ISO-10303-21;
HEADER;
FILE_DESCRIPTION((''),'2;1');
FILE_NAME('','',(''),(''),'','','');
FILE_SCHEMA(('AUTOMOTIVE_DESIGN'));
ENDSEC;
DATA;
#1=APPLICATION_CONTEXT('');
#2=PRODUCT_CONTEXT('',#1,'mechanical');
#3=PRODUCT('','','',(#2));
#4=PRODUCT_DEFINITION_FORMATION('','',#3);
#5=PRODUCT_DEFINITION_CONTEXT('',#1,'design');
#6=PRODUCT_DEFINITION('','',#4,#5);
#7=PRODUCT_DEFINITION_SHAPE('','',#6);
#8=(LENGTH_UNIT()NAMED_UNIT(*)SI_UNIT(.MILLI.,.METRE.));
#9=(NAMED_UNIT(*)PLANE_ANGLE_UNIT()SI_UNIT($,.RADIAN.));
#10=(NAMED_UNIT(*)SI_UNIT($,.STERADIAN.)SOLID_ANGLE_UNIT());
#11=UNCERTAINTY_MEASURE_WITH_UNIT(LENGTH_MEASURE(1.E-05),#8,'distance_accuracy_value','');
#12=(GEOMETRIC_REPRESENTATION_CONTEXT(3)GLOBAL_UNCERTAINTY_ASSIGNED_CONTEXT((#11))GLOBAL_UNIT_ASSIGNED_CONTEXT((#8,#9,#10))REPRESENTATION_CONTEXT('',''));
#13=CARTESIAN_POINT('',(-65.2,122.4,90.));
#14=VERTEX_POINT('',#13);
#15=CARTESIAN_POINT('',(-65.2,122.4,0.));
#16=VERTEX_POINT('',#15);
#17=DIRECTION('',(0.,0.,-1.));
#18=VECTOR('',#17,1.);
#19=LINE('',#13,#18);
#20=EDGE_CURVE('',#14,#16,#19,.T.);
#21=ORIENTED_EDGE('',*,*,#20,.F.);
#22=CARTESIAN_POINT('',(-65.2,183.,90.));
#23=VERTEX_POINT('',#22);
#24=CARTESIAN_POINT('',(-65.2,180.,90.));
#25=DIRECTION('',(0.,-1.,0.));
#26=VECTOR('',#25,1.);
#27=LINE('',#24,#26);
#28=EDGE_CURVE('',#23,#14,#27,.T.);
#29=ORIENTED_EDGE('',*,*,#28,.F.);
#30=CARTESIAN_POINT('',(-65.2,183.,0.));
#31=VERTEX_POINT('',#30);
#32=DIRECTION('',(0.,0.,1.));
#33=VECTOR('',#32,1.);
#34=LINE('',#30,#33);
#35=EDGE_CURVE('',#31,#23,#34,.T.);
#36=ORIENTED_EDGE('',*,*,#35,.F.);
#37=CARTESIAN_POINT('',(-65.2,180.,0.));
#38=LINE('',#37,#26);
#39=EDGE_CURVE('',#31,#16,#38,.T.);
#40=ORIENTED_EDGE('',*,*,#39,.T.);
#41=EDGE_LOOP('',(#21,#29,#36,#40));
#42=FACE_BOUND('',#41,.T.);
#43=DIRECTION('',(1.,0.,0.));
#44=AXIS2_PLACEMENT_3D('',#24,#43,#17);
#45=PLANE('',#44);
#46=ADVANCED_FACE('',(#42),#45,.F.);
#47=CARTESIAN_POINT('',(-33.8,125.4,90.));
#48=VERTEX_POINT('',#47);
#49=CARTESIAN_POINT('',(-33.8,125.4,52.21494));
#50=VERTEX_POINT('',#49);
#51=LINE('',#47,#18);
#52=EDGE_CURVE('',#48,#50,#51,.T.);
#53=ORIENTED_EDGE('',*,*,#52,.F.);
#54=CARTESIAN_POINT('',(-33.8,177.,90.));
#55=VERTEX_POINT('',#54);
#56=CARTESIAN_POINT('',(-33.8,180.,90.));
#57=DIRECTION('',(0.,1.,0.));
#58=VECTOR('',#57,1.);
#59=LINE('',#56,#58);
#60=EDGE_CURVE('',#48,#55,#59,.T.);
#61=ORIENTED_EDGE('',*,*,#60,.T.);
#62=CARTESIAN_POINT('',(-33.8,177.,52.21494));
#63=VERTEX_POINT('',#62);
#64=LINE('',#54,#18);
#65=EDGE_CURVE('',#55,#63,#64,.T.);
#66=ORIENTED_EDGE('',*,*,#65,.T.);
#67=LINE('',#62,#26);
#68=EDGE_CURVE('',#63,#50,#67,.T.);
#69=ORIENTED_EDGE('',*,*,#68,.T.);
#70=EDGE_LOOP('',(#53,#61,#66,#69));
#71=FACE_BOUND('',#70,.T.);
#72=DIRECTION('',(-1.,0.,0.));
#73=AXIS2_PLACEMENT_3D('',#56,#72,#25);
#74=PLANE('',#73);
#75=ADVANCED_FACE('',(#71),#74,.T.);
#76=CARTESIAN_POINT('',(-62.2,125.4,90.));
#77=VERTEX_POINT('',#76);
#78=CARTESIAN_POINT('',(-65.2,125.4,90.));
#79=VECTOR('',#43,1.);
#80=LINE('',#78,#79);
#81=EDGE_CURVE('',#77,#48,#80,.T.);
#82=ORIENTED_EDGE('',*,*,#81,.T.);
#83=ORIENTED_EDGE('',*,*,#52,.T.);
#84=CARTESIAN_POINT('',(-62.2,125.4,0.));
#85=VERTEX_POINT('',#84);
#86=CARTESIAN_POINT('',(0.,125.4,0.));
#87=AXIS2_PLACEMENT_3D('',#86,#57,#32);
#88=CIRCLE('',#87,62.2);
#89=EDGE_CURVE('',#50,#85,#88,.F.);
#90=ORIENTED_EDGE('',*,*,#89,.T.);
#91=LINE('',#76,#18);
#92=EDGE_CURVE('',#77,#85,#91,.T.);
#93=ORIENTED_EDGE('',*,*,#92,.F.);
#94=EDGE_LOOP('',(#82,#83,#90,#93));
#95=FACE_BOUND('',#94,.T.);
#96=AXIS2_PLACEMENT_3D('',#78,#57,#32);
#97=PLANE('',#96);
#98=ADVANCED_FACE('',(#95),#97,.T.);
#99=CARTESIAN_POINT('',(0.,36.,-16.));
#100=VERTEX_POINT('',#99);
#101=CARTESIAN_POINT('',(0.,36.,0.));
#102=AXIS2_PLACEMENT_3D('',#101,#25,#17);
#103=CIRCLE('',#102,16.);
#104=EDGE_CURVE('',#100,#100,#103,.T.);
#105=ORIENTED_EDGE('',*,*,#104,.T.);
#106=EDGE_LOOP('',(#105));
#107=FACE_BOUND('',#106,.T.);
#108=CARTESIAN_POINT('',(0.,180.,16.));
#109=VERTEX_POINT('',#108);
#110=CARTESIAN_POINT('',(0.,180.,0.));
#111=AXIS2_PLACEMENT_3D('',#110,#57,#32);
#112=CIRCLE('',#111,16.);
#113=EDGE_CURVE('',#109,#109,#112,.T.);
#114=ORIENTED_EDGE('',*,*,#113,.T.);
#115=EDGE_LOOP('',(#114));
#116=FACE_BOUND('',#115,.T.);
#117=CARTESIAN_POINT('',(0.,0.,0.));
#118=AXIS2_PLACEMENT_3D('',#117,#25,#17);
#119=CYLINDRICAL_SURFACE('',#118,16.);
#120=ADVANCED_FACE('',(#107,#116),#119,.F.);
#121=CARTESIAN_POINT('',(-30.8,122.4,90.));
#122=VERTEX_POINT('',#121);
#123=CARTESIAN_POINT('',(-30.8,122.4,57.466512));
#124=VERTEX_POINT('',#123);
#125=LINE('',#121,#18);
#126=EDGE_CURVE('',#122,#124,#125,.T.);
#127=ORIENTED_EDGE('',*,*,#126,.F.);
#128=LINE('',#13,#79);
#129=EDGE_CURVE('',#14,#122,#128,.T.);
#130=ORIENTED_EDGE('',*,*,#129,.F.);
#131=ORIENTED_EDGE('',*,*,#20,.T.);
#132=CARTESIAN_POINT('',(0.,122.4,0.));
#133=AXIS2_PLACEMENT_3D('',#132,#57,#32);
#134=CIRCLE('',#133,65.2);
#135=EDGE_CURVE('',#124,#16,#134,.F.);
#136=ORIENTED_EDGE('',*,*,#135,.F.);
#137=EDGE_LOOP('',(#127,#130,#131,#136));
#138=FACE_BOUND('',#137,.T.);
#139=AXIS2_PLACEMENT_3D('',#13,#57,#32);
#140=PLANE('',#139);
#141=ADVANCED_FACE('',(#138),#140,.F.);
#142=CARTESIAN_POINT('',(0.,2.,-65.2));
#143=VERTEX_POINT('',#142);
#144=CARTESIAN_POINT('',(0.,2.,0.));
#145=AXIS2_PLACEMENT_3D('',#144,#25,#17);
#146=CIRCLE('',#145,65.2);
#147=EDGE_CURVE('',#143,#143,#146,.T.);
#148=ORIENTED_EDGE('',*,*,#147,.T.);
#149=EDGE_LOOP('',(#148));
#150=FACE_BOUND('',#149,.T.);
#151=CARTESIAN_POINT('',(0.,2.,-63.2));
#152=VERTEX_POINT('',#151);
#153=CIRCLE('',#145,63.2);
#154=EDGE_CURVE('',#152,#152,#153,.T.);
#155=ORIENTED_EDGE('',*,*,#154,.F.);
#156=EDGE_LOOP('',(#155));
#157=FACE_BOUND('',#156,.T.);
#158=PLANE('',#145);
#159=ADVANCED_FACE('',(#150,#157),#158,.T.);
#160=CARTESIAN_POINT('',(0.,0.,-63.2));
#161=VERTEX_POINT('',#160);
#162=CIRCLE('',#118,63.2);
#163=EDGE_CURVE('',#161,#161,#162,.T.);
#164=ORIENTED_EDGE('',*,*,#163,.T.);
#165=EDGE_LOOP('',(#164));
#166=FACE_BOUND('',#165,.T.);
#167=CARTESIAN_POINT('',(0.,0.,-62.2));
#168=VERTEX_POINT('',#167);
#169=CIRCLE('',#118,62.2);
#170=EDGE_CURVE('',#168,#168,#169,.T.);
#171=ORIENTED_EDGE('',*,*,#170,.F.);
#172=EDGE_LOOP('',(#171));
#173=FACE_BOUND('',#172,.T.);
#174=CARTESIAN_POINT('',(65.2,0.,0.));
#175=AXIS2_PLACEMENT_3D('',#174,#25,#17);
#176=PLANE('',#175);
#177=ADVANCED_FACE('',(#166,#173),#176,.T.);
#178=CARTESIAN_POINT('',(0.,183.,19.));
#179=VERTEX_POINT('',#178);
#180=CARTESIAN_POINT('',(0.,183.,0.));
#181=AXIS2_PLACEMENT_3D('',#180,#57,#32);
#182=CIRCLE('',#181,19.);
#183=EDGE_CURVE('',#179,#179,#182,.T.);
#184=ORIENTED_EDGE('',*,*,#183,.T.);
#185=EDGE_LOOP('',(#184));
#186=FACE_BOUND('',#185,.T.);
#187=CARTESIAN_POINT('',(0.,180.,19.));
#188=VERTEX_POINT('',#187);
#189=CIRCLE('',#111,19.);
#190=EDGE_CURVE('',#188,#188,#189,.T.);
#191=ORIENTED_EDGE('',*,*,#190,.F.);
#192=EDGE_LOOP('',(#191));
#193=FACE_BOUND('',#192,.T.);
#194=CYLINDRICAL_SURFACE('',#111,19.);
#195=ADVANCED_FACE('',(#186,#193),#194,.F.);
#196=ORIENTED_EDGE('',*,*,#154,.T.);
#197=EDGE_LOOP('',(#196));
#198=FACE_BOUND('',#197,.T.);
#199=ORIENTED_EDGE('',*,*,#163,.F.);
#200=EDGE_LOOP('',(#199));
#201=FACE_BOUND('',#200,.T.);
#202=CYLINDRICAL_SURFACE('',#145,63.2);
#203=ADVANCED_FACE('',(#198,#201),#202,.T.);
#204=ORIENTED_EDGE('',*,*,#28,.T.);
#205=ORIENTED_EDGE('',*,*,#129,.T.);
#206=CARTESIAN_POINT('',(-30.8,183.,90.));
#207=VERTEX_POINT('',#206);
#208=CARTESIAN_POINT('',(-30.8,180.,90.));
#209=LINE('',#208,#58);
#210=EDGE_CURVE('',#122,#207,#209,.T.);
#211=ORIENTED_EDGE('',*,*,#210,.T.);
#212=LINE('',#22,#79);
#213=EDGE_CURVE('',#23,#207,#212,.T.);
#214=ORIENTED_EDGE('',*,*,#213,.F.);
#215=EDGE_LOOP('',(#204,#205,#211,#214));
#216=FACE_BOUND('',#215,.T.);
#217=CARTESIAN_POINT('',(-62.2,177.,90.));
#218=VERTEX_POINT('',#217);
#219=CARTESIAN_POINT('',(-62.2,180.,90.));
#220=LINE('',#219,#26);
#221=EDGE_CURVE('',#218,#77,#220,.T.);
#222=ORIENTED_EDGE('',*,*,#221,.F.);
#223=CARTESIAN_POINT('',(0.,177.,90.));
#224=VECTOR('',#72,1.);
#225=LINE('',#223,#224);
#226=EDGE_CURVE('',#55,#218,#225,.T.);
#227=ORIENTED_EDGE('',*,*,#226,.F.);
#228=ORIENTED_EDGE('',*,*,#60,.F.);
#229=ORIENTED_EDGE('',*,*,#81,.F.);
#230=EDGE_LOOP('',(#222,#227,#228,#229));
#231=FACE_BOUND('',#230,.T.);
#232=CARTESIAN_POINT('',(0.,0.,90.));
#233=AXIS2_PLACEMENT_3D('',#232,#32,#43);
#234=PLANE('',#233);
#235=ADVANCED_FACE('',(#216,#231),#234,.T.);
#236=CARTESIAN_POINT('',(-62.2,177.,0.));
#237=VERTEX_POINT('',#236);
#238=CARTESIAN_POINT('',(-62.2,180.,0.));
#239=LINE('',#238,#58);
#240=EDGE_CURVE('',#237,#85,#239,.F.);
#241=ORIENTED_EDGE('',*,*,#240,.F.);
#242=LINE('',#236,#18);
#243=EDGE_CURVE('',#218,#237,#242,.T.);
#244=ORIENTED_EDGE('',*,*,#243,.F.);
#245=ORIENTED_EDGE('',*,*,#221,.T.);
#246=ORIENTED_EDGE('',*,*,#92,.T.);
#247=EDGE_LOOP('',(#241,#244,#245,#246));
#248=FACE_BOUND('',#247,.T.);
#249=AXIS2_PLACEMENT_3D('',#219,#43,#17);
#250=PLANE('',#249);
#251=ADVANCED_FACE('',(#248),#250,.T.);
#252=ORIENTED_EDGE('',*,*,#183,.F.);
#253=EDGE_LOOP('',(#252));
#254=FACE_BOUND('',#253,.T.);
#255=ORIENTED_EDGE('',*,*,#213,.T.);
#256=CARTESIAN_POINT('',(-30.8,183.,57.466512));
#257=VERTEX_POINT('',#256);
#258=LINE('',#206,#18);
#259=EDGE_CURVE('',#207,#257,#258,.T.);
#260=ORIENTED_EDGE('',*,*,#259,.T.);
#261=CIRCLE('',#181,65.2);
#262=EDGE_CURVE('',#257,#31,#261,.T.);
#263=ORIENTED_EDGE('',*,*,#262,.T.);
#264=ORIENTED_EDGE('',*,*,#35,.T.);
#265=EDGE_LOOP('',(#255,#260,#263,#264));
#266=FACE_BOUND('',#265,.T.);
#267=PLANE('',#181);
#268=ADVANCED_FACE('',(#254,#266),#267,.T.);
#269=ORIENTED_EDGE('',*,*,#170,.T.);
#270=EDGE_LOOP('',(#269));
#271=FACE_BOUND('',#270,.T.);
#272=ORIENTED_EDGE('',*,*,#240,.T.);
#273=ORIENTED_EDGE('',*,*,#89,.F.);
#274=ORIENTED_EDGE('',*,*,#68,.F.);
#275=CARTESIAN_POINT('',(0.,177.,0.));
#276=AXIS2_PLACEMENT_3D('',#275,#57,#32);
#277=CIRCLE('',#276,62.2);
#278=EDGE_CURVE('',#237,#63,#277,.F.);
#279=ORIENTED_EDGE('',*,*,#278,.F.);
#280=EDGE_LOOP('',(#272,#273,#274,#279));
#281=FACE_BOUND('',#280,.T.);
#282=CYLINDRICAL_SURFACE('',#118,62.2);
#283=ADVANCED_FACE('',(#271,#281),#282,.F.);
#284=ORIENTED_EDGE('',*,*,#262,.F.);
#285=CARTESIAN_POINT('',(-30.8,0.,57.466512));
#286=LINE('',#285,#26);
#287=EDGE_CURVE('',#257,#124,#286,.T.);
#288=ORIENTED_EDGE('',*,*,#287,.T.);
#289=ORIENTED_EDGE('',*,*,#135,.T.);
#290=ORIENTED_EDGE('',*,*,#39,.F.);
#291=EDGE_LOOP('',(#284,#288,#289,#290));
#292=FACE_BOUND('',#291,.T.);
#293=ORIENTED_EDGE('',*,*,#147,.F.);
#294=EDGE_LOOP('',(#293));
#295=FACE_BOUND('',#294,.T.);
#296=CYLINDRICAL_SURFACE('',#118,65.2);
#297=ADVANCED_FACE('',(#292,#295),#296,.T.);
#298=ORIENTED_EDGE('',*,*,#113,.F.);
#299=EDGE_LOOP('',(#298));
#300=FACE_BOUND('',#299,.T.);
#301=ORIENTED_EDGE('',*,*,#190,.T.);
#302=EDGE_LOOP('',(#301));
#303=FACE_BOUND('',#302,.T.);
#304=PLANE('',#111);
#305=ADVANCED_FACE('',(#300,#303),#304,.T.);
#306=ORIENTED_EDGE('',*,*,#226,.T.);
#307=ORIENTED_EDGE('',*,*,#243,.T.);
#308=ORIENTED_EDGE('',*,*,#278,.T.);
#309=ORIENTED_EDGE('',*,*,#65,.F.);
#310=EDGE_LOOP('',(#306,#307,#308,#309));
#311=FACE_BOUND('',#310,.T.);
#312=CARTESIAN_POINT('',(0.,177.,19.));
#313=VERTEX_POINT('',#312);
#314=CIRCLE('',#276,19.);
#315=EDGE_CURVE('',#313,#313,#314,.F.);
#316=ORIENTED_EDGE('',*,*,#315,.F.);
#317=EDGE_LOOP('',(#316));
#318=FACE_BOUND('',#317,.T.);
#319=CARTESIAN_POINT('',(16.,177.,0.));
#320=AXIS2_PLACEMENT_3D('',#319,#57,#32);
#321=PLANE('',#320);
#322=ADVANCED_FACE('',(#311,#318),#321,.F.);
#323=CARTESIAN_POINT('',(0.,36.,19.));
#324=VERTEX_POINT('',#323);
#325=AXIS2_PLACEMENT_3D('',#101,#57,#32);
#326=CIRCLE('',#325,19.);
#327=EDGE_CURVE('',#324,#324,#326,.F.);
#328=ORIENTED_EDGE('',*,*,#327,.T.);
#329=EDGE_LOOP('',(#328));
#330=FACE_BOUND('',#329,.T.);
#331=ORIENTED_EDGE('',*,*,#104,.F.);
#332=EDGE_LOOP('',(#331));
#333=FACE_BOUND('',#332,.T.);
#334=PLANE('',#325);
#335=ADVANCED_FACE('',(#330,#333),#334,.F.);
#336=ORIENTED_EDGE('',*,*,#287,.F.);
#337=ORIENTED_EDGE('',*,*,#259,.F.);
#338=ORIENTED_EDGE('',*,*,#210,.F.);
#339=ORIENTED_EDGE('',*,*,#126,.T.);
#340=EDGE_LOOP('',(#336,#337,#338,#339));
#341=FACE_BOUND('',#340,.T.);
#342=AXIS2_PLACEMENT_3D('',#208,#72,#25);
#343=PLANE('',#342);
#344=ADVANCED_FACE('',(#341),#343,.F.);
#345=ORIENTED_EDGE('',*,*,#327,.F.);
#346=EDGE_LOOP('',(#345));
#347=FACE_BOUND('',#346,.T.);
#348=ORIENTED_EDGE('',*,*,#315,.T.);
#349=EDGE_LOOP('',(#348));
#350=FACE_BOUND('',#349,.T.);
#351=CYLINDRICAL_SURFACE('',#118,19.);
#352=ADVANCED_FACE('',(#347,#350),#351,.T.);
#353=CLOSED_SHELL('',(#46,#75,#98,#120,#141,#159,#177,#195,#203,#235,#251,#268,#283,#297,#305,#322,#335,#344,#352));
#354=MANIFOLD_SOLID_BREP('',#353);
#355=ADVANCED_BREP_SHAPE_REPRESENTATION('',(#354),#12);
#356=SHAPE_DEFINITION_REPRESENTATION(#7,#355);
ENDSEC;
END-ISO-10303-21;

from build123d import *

# Parameters (mm, degrees)
SKETCH_4_W                = 34.4
SKETCH_4_H                = 57.6
EXTRUDE_3_DEPTH           = 90
SHELL_2_OUTLINE_R         = 62.2
SHELL_2_OUTLINE_R_2       = 19
SHELL_2_DEPTH             = 177
SHELL_START               = 125.4
SHELL_2_2_DEPTH           = 51.6
SHELL_2_3_OUTLINE_R       = 19
SHELL_2_3_DEPTH           = 36
EXTRUDE_4_DEPTH           = 3
CUT_EXTRUDE_START         = -3
SKETCH_9_R                = 16
CUT_EXTRUDE_1_DEPTH       = 3
SKETCH_10_R               = 19
CUT_EXTRUDE_2_DEPTH       = 3
CUT_EXTRUDE_START_2       = -2
CUT_EXTRUDE_3_OUTLINE_R   = 65.2
CUT_EXTRUDE_3_OUTLINE_R_2 = 63.2
CUT_EXTRUDE_3_DEPTH       = 2


# Read off the part's stored shape, not the designer's step: 쉘2, 컷-돌출3
with BuildPart() as part:
    # 스케치3 → 회전1 (revolve)
    with BuildSketch(Plane.XY, mode=Mode.PRIVATE) as revolve_1_sk:
        Polygon((0, 36), (16, 36), (16, 180), (65.2, 180), (65.2, 0), (0, 0), align=None)
    revolve(revolve_1_sk.sketch.rotate(Axis((0, 0, 0), (0, 1, 0)), 90), axis=Axis((0, 0, 0), (0, 1, 0)))

    # 스케치4 → 보스-돌출3 (add)
    with BuildSketch(Plane.XY):
        with Locations((-48, 151.2)):
            Rectangle(SKETCH_4_W, SKETCH_4_H)
    extrude(amount=EXTRUDE_3_DEPTH)

    # 쉘2 outline → 쉘2 (cut)
    with BuildSketch(Plane(origin=(0, 0, 0), x_dir=(1, 0, 0), z_dir=(0, 1, 0))):
        Circle(SHELL_2_OUTLINE_R)
        Circle(SHELL_2_OUTLINE_R_2, mode=Mode.SUBTRACT)
    extrude(amount=SHELL_2_DEPTH, mode=Mode.SUBTRACT)

    # Shell 2 2 outline → Shell 2 2 (cut)
    with BuildSketch(Plane(origin=(0, 0, 0), x_dir=(1, 0, 0), z_dir=(0, 1, 0)).offset(SHELL_START)):
        with BuildLine():
            ThreePointArc((-33.8, -52.214940391), (-54.640644213, -29.719353963), (-62.2, 0))
            Line((-62.2, 0), (-62.2, -90))
            Line((-62.2, -90), (-33.8, -90))
            Line((-33.8, -90), (-33.8, -52.214940391))
        make_face()
    extrude(amount=SHELL_2_2_DEPTH, mode=Mode.SUBTRACT)

    # Shell 2 3 outline → Shell 2 3 (cut)
    with BuildSketch(Plane(origin=(0, 0, 0), x_dir=(1, 0, 0), z_dir=(0, 1, 0))):
        Circle(SHELL_2_3_OUTLINE_R)
    extrude(amount=SHELL_2_3_DEPTH, mode=Mode.SUBTRACT)

    # 스케치8 → 보스-돌출4 (add)
    with BuildSketch(Plane(origin=(0, 180, 0), x_dir=(1, 0, 0), z_dir=(0, 1, 0))):
        with BuildLine():
            Line((-30.8, -90), (-30.8, -57.466511987))
            ThreePointArc((-30.8, -57.466511987), (55.942827959, 33.487908266), (-65.2, 0))
            Line((-65.2, 0), (-65.2, -90))
            Line((-65.2, -90), (-30.8, -90))
        make_face()
    extrude(amount=EXTRUDE_4_DEPTH)

    # 스케치9 → 컷-돌출1 (cut)
    with BuildSketch(Plane.XZ.offset(-180).offset(CUT_EXTRUDE_START)):
        with Locations(Location((0, 0, 0), (0, 0, 270))):
            Circle(SKETCH_9_R)
    extrude(amount=CUT_EXTRUDE_1_DEPTH, mode=Mode.SUBTRACT)

    # 스케치10 → 컷-돌출2 (cut)
    with BuildSketch(Plane(origin=(0, 183, 0), x_dir=(1, 0, 0), z_dir=(0, 1, 0)).offset(CUT_EXTRUDE_START)):
        with Locations(Location((0, 0, 0), (0, 0, 270))):
            Circle(SKETCH_10_R)
    extrude(amount=CUT_EXTRUDE_2_DEPTH, mode=Mode.SUBTRACT)

    # 컷-돌출3 outline → 컷-돌출3 (cut)
    with BuildSketch(Plane.XZ.offset(CUT_EXTRUDE_START_2)):
        Circle(CUT_EXTRUDE_3_OUTLINE_R)
        Circle(CUT_EXTRUDE_3_OUTLINE_R_2, mode=Mode.SUBTRACT)
    extrude(amount=CUT_EXTRUDE_3_DEPTH, mode=Mode.SUBTRACT)


solid = part.part
